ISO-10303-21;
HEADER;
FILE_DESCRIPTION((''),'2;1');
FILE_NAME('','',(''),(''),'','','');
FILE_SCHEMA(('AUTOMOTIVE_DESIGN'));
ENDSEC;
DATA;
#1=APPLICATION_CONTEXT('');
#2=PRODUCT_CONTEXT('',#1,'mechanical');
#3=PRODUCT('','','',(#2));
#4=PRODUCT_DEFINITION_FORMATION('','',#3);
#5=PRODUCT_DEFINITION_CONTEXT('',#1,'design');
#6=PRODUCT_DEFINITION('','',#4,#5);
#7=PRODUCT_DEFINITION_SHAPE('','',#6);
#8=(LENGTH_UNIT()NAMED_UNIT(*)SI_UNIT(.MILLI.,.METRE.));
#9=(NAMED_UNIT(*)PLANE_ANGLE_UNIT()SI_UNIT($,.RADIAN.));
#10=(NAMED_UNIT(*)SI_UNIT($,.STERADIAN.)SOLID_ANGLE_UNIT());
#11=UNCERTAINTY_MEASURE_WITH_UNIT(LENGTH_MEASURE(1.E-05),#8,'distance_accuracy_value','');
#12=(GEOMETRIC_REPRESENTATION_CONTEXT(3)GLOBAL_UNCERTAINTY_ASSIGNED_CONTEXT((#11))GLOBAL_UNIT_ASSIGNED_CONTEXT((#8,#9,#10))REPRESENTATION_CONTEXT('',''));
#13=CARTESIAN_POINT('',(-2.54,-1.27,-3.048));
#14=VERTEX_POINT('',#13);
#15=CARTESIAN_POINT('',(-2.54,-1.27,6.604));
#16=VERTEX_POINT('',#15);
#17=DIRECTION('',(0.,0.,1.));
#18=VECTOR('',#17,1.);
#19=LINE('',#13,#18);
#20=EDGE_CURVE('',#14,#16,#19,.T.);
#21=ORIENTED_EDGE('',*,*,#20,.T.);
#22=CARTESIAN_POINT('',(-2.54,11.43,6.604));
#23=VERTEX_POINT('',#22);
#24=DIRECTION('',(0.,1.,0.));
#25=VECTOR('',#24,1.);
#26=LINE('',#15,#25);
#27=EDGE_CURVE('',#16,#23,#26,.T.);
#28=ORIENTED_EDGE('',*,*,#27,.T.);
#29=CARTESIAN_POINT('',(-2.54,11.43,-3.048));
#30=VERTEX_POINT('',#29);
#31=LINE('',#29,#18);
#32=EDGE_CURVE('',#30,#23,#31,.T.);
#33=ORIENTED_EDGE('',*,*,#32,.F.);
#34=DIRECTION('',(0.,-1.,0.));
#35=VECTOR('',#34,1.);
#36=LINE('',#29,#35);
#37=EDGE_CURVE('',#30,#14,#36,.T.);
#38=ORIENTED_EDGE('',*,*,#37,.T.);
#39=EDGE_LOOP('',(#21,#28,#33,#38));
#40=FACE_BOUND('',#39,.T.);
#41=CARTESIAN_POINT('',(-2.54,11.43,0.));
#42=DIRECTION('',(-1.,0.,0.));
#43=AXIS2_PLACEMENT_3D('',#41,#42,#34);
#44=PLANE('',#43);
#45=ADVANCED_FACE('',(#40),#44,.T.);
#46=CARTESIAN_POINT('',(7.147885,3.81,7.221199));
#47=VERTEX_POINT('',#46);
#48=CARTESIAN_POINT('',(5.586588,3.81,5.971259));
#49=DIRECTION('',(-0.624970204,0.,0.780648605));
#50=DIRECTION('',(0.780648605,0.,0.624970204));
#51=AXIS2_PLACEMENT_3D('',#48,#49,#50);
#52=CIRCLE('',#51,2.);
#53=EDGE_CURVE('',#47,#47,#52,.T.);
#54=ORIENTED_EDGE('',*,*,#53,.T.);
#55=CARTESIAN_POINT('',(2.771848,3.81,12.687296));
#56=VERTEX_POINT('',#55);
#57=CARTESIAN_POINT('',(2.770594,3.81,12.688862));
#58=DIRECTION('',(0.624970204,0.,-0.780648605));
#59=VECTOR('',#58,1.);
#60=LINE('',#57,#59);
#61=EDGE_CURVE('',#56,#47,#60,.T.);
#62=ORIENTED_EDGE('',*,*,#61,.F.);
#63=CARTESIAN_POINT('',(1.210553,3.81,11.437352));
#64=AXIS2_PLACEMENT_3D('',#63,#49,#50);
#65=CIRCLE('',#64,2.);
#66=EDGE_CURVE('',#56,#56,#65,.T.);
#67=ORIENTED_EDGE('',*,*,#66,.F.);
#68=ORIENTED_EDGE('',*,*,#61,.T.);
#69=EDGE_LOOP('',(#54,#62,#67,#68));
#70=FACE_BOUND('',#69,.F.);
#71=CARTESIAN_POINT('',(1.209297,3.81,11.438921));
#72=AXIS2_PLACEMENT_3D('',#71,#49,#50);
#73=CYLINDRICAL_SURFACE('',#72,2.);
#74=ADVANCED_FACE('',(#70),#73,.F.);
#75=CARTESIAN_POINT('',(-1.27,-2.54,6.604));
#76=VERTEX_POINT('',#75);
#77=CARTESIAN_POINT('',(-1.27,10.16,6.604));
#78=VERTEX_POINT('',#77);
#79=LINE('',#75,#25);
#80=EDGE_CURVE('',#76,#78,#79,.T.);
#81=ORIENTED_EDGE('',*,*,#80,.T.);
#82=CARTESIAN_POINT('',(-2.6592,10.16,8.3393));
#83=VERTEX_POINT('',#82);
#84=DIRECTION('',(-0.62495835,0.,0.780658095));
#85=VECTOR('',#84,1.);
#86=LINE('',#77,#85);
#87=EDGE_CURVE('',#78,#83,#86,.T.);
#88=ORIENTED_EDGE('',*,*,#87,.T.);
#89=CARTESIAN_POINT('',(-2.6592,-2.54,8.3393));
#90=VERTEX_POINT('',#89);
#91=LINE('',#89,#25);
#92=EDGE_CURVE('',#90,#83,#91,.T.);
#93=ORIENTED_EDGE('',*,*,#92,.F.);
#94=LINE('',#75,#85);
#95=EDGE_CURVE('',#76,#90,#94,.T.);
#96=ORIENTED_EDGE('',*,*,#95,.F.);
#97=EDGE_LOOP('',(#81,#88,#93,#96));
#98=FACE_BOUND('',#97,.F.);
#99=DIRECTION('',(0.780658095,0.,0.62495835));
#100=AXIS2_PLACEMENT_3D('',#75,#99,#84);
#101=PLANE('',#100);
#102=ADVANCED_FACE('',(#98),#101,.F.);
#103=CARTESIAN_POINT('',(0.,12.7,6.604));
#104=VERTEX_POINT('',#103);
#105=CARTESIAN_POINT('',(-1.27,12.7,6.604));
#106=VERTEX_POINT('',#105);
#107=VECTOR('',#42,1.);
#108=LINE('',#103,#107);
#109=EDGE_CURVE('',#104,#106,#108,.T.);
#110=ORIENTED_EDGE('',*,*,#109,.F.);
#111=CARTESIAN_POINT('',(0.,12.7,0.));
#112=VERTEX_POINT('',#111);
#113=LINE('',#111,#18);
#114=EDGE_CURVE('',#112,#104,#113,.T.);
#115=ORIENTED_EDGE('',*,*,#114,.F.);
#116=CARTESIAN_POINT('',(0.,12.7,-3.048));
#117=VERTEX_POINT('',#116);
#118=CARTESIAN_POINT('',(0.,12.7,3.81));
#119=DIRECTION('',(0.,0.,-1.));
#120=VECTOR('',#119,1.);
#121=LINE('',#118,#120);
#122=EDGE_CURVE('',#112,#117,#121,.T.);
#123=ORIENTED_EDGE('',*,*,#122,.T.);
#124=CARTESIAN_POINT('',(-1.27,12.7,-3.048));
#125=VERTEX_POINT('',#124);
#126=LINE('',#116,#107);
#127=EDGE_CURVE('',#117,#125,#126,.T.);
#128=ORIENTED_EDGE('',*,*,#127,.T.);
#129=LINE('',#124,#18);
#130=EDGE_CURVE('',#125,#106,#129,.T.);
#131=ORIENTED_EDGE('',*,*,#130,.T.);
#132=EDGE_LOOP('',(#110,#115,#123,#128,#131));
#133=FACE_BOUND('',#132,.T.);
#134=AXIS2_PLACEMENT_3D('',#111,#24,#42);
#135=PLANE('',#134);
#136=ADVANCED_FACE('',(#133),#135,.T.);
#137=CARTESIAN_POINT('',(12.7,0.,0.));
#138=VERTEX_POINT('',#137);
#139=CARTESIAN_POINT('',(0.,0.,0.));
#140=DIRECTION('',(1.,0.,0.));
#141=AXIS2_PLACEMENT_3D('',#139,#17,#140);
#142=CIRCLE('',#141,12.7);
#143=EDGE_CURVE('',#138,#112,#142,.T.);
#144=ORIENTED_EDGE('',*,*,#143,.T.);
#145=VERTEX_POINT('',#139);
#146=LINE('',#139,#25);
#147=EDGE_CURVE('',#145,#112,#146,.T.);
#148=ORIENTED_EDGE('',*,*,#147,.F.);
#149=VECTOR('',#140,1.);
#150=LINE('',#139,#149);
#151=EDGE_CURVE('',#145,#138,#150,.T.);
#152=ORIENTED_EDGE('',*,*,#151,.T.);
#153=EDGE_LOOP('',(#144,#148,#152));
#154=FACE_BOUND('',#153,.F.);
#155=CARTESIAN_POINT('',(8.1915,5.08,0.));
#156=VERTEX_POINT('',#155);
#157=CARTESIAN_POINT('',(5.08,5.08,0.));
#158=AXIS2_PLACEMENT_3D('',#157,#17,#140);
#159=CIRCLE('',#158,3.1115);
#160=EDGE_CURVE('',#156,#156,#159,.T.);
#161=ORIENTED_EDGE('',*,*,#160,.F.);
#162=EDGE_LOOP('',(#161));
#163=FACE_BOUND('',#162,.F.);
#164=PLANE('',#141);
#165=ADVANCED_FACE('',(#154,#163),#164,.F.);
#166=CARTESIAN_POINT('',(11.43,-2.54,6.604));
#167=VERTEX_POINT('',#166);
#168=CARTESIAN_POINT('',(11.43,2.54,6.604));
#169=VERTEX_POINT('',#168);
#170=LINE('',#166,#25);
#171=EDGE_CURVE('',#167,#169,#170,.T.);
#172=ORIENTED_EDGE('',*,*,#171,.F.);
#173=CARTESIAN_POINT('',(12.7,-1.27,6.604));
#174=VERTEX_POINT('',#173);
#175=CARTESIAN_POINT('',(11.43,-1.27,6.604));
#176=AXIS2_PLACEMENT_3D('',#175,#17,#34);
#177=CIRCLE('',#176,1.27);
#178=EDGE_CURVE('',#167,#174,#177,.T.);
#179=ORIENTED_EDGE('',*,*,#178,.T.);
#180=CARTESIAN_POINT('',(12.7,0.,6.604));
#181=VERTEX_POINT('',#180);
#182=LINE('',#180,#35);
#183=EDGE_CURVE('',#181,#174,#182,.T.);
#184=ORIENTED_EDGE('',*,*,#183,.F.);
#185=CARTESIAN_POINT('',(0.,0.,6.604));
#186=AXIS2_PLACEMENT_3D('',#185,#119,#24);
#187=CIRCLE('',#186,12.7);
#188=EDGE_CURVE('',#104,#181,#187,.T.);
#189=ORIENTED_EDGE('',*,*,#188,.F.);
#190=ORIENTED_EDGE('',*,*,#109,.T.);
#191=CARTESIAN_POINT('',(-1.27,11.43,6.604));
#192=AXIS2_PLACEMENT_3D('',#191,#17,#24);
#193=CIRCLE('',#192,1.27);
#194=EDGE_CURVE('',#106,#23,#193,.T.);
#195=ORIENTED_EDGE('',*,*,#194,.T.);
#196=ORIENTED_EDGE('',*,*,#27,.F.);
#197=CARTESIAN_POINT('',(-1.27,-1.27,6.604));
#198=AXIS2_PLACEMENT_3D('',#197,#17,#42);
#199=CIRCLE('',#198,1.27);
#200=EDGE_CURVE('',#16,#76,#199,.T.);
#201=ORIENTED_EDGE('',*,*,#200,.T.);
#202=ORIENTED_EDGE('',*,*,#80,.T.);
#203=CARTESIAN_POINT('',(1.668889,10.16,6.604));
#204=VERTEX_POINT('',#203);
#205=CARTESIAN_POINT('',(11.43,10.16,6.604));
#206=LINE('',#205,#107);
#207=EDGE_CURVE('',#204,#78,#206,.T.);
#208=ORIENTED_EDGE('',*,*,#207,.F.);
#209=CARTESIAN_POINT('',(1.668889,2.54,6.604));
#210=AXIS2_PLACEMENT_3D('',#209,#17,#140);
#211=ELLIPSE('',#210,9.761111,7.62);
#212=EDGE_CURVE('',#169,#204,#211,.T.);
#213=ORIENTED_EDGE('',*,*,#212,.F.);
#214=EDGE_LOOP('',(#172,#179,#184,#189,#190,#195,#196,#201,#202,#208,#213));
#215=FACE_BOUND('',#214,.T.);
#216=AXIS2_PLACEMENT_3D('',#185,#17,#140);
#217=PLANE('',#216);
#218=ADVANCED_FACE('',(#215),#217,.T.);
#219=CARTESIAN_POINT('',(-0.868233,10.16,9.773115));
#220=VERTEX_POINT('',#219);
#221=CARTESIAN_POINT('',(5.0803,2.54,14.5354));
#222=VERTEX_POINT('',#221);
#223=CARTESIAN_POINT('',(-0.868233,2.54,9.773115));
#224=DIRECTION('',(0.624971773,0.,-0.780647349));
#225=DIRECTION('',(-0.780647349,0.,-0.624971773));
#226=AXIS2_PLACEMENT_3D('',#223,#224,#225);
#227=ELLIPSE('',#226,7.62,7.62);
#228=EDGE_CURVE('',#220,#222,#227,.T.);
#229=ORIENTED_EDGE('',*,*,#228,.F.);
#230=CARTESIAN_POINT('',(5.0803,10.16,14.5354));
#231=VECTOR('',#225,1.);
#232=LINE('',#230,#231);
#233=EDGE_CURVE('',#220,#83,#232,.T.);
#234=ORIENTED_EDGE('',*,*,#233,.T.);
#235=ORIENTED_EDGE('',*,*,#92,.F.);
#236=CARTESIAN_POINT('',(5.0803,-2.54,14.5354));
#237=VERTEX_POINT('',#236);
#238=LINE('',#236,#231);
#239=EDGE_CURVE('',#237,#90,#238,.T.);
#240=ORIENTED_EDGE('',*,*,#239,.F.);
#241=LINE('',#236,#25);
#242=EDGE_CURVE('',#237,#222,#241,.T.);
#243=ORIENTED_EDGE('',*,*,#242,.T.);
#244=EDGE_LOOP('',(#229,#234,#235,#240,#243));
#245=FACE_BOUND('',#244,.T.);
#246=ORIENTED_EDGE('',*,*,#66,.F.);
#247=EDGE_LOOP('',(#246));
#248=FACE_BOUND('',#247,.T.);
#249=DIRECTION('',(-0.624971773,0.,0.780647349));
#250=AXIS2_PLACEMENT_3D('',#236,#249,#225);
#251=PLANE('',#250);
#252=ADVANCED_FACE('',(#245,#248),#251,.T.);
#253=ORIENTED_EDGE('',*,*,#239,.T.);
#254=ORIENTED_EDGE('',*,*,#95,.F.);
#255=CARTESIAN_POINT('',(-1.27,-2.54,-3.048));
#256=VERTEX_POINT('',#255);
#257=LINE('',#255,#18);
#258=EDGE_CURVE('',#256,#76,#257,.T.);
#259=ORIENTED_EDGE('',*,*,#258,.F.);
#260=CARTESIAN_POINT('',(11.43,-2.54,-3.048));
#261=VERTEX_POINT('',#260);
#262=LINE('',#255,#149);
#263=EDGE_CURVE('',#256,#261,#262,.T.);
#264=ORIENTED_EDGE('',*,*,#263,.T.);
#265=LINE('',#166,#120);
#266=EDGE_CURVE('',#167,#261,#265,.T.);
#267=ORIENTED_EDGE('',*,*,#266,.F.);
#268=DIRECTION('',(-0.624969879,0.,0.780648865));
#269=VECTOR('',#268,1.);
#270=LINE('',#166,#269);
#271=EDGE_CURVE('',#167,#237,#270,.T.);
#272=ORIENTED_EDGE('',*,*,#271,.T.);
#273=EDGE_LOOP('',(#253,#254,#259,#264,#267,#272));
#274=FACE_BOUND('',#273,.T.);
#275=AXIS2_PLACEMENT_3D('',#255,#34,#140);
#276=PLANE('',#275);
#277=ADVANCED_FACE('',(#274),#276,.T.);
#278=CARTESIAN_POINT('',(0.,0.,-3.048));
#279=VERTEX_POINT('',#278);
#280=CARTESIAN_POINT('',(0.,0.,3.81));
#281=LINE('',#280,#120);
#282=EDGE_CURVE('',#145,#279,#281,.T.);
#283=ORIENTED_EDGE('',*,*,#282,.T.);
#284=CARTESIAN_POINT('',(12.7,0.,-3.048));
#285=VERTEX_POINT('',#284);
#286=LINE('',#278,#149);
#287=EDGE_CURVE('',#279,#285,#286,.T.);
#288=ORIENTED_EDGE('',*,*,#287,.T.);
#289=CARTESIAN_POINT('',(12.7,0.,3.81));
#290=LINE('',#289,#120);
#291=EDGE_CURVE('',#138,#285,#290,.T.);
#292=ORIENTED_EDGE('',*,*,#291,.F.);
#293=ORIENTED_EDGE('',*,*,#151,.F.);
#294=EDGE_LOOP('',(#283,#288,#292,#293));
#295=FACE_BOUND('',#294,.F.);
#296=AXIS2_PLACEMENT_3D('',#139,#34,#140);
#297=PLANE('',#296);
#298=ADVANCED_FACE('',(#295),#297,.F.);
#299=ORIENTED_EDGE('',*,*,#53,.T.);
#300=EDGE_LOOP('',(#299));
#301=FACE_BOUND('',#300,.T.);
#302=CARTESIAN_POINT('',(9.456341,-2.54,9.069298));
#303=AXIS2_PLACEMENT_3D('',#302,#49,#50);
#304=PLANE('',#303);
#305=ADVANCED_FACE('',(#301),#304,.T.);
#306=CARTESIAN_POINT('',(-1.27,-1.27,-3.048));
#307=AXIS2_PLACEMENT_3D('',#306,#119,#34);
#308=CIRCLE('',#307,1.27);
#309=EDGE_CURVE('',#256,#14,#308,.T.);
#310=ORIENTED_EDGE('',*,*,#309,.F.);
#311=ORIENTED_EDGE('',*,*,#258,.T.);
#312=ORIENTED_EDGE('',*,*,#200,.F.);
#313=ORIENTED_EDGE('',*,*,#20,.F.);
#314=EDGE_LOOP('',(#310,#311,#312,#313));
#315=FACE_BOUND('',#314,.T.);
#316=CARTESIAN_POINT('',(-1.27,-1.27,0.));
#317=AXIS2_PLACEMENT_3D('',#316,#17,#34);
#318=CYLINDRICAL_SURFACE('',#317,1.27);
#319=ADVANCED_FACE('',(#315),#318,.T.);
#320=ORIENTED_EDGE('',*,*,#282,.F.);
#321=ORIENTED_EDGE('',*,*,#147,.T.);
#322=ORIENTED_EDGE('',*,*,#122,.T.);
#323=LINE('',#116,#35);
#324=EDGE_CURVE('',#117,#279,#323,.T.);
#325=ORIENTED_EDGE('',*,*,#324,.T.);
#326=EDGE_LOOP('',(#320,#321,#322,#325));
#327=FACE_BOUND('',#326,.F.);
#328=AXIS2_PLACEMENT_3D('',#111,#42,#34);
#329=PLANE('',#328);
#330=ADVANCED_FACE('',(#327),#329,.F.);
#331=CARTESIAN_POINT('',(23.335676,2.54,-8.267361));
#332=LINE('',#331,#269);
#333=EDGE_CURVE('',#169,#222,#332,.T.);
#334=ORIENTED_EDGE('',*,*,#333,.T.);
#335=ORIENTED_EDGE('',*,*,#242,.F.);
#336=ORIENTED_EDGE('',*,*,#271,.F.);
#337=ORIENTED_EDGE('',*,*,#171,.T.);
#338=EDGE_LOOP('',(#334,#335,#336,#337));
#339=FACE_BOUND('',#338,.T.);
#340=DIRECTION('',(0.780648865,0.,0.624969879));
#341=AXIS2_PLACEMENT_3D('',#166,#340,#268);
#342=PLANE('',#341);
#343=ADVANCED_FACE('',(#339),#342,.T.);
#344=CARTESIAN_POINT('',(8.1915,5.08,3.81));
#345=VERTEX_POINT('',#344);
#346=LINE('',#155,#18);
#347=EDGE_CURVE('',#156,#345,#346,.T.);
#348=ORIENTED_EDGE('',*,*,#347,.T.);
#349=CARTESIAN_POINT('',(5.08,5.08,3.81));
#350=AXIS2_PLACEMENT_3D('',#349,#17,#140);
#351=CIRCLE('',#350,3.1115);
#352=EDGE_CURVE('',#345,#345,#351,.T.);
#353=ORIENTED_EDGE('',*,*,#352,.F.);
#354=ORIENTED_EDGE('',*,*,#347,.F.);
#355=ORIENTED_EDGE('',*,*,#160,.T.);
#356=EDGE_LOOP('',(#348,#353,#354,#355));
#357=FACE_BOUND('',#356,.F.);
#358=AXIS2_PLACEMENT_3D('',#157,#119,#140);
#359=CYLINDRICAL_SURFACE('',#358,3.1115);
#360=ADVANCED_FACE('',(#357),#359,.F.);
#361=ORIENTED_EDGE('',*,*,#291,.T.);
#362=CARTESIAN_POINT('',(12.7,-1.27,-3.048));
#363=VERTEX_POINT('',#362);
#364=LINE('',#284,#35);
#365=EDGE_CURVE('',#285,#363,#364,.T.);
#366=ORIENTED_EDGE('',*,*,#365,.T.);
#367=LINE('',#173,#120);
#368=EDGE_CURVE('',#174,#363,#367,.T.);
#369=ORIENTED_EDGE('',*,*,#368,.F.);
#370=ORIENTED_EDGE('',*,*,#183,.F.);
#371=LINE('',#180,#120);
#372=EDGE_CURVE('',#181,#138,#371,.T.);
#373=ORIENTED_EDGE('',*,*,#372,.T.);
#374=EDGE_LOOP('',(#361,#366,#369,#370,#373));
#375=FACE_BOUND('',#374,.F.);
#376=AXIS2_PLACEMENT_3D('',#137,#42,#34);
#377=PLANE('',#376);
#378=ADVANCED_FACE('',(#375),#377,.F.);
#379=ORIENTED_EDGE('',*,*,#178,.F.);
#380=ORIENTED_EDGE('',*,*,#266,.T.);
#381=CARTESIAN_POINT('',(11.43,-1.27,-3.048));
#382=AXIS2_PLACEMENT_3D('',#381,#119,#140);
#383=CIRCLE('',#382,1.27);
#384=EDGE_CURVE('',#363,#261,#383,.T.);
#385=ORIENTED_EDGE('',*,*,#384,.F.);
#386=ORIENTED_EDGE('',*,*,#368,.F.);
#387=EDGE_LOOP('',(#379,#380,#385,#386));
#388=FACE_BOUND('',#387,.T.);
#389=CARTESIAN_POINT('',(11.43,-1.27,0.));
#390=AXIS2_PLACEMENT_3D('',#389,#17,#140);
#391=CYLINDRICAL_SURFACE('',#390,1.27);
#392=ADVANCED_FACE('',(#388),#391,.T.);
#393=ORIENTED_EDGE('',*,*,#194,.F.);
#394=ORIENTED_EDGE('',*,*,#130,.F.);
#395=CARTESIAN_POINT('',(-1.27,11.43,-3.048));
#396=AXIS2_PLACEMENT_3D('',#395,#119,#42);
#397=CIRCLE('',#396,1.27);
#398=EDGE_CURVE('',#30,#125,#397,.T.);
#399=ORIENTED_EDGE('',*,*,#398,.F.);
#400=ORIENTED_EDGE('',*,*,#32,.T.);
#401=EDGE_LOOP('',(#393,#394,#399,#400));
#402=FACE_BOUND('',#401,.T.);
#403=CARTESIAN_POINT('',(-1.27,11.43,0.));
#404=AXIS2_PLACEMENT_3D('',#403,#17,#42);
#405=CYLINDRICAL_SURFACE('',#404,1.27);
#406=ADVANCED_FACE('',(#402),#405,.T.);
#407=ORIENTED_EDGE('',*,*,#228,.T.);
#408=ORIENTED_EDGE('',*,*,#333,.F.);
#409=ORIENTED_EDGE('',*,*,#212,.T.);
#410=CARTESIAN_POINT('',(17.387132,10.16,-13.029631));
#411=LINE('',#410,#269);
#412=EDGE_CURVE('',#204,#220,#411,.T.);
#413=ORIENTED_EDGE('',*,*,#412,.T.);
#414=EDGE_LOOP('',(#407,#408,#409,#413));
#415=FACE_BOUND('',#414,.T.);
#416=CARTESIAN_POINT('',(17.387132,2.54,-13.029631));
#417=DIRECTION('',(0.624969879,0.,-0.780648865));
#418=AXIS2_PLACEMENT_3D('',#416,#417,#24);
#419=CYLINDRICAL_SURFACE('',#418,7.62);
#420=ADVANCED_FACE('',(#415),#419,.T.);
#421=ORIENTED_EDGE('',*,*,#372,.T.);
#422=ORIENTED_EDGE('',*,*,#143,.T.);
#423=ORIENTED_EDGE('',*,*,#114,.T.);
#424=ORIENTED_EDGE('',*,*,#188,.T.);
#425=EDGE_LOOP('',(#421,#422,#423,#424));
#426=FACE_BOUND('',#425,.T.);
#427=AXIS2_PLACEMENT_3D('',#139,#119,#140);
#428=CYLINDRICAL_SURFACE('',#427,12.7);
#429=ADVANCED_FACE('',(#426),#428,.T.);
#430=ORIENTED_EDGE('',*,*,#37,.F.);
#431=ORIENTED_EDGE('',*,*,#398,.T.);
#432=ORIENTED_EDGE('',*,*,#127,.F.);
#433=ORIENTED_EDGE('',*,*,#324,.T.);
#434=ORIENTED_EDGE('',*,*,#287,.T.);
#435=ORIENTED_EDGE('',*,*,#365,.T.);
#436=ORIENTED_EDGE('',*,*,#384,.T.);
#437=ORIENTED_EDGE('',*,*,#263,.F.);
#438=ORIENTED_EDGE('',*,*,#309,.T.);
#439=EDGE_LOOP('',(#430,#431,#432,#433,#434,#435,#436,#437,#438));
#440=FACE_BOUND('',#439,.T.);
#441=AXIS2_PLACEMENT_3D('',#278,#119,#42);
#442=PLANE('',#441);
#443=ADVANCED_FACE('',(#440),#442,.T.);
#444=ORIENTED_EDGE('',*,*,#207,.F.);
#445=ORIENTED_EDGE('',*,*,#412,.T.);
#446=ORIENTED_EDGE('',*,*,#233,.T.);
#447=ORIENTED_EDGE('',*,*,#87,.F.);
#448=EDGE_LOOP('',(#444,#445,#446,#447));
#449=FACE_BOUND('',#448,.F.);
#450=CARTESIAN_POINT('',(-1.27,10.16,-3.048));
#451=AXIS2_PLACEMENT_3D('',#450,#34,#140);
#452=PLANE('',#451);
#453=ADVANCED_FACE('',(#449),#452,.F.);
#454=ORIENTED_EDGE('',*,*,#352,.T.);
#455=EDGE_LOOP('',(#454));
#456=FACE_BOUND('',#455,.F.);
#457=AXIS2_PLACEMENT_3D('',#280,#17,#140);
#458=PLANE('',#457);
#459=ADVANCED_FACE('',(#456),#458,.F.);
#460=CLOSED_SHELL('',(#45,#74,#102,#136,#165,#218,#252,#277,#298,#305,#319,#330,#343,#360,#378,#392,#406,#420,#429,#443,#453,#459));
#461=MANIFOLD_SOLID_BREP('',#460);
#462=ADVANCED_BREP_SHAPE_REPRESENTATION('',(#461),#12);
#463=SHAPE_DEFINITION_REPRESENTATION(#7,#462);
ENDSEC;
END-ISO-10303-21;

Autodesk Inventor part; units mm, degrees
ref_plane "YZ Plane" through (0, 0, 0) normal (1, 0, 0) x (0, 1, 0)
ref_plane "XZ Plane" through (0, 0, 0) normal (0, 1, 0) x (-1, 0, 0)
ref_plane "XY Plane" through (0, 0, 0) normal (0, 0, 1) x (1, 0, 0)
sketch "Sketch2" plane through (0, 0, 0) normal (0, 0, 1) x (1, 0, 0)
  line L0 (0, 0) -> (12.7, 0)
  line L1 (0, 0) -> (0, 12.7)
  arc A0 (12.7, 0) -> (0, 12.7) centre (0, 0) ccw
  circle A1 centre (5.08, 5.08) radius 3.1115
  dimension "d4" = 12.7
  dimension "d5" = 6.223
  dimension "d6" = 5.08
  dimension "d7" = 5.08
extrude "Extrusion1" add sketch "Sketch2" along normal blind 3.81
sketch "Sketch4" plane through (0, 0, 0) normal (0, 0, -1) x (-1, 0, 0)
  arc A0 (0, 12.7) -> (-12.7, 0) centre (0, 0) ccw projected
  line L0 (-12.7, 0) -> (-12.7, -1.27)
  line L1 (0, 12.7) -> (1.27, 12.7)
  line L2 (2.54, 11.43) -> (2.54, -1.27)
  line L3 (1.27, -2.54) -> (-11.43, -2.54)
  line L4 (0, 12.7) -> (0, 0)
  line L5 (0, 0) -> (-12.7, 0)
  arc A1 (-12.7, -1.27) -> (-11.43, -2.54) centre (-11.43, -1.27) ccw
  arc A2 (1.27, -2.54) -> (2.54, -1.27) centre (1.27, -1.27) ccw
  arc A3 (2.54, 11.43) -> (1.27, 12.7) centre (1.27, 11.43) ccw
  point P0 (-12.7, -2.54)
  point P1 (2.54, 12.7)
  dimension "d10" = 2.54
  dimension "d11" = 2.54
  dimension "d12" = 1.27
extrude "Extrusion2" add sketch "Sketch4" along normal blind 3.048 and the other way blind 3.81 contours L1 A3 L2 A2 L3 A1 L0 L5 L4
sketch "Sketch5" plane through (0, 0, 3.81) normal (0, 0, 1) x (1, 0, 0)
  line L0 (-1.27, -2.54) -> (11.43, -2.54)
  line L1 (-2.54, -1.27) -> (-2.54, 11.43)
  arc A0 (12.7, 0) -> (0, 12.7) centre (0, 0) ccw
  line L2 (0, 12.7) -> (-1.27, 12.7)
  line L3 (12.7, 0) -> (12.7, -1.27)
  arc A1 (-1.27, 12.7) -> (-2.54, 11.43) centre (-1.27, 11.43) ccw
  arc A2 (-2.54, -1.27) -> (-1.27, -2.54) centre (-1.27, -1.27) ccw
  arc A3 (11.43, -2.54) -> (12.7, -1.27) centre (11.43, -1.27) ccw
  line L4 (0, 12.7) -> (0, 0) projected
  line L5 (0, 0) -> (12.7, 0) projected
  circle A4 centre (5.08, 5.08) radius 3.1115
  dimension "d17" = 1.27
  dimension "d18" = 2.54
  dimension "d19" = 2.54
extrude "Extrusion3" add sketch "Sketch5" along normal blind 2.794 contours A2 L1 A1 L2 L4 L5 L3 A3 L0 | L5 L4 A0 | A4
sketch "Sketch7" plane through (-1.27, -2.54, -3.048) normal (0, -1, 0) x (1, 0, 0)
  line L0 (12.7, 0) -> (12.7, 9.652) projected
  line L1 (12.7, 9.652) -> (6.3503, 17.5834)
  line L2 (0, 9.652) -> (0, 0) projected
  line L3 (0, 9.652) -> (-1.3892, 11.3873)
  line L4 (6.3503, 17.5834) -> (-1.3892, 11.3873)
  line L5 (12.7, 9.652) -> (0, 9.652)
  point P0 (1.27, 3.048)
  dimension "d22" = 141.32
  dimension "d23" = 141.32
  dimension "d24" = 10.16
extrude "Extrusion4" add sketch "Sketch7" against normal blind 12.7
sketch "Sketch8" plane through (5.0803, -2.54, 14.5354) normal (-0.6249702, 0, 0.7806486) x (0.7806486, 0, 0.6249702)
  line L0 (0, 0) -> (-9.9142, 0) construction
  line L1 (-9.9142, 12.7) -> (0, 12.7) construction
  line L2 (0, 0) -> (-9.9142, 12.7) construction
  line L3 (-9.9142, 0) -> (-9.9142, 12.7) construction
  line L4 (-9.9142, 0) -> (-1.8469, 10.3341) construction
  circle A0 centre (-4.9571, 6.35) radius 2
  point P0 (-13.0501, 2.54)
  dimension "d27" = 4
extrude "Extrusion5" cut sketch "Sketch8" against normal blind 7
fillet "Fillet1" radius 7.62 1 edges at (8.2552, 10.16, 10.5697)
equation "\"d27\" = m3_heat_set_insert"
equation "\"d28\" = m3_heat_set_depth"
equation "\"m3_heat_set_insert\" = 4"
equation "\"m3_clearance\" = 3.4"
equation "\"m3_heat_set_depth\" = 7"
equation "\"robot_diameter\" = 354"
equation "\"hardboard_thickness\" = 5"
properties part number "display_bottom_support_left"
